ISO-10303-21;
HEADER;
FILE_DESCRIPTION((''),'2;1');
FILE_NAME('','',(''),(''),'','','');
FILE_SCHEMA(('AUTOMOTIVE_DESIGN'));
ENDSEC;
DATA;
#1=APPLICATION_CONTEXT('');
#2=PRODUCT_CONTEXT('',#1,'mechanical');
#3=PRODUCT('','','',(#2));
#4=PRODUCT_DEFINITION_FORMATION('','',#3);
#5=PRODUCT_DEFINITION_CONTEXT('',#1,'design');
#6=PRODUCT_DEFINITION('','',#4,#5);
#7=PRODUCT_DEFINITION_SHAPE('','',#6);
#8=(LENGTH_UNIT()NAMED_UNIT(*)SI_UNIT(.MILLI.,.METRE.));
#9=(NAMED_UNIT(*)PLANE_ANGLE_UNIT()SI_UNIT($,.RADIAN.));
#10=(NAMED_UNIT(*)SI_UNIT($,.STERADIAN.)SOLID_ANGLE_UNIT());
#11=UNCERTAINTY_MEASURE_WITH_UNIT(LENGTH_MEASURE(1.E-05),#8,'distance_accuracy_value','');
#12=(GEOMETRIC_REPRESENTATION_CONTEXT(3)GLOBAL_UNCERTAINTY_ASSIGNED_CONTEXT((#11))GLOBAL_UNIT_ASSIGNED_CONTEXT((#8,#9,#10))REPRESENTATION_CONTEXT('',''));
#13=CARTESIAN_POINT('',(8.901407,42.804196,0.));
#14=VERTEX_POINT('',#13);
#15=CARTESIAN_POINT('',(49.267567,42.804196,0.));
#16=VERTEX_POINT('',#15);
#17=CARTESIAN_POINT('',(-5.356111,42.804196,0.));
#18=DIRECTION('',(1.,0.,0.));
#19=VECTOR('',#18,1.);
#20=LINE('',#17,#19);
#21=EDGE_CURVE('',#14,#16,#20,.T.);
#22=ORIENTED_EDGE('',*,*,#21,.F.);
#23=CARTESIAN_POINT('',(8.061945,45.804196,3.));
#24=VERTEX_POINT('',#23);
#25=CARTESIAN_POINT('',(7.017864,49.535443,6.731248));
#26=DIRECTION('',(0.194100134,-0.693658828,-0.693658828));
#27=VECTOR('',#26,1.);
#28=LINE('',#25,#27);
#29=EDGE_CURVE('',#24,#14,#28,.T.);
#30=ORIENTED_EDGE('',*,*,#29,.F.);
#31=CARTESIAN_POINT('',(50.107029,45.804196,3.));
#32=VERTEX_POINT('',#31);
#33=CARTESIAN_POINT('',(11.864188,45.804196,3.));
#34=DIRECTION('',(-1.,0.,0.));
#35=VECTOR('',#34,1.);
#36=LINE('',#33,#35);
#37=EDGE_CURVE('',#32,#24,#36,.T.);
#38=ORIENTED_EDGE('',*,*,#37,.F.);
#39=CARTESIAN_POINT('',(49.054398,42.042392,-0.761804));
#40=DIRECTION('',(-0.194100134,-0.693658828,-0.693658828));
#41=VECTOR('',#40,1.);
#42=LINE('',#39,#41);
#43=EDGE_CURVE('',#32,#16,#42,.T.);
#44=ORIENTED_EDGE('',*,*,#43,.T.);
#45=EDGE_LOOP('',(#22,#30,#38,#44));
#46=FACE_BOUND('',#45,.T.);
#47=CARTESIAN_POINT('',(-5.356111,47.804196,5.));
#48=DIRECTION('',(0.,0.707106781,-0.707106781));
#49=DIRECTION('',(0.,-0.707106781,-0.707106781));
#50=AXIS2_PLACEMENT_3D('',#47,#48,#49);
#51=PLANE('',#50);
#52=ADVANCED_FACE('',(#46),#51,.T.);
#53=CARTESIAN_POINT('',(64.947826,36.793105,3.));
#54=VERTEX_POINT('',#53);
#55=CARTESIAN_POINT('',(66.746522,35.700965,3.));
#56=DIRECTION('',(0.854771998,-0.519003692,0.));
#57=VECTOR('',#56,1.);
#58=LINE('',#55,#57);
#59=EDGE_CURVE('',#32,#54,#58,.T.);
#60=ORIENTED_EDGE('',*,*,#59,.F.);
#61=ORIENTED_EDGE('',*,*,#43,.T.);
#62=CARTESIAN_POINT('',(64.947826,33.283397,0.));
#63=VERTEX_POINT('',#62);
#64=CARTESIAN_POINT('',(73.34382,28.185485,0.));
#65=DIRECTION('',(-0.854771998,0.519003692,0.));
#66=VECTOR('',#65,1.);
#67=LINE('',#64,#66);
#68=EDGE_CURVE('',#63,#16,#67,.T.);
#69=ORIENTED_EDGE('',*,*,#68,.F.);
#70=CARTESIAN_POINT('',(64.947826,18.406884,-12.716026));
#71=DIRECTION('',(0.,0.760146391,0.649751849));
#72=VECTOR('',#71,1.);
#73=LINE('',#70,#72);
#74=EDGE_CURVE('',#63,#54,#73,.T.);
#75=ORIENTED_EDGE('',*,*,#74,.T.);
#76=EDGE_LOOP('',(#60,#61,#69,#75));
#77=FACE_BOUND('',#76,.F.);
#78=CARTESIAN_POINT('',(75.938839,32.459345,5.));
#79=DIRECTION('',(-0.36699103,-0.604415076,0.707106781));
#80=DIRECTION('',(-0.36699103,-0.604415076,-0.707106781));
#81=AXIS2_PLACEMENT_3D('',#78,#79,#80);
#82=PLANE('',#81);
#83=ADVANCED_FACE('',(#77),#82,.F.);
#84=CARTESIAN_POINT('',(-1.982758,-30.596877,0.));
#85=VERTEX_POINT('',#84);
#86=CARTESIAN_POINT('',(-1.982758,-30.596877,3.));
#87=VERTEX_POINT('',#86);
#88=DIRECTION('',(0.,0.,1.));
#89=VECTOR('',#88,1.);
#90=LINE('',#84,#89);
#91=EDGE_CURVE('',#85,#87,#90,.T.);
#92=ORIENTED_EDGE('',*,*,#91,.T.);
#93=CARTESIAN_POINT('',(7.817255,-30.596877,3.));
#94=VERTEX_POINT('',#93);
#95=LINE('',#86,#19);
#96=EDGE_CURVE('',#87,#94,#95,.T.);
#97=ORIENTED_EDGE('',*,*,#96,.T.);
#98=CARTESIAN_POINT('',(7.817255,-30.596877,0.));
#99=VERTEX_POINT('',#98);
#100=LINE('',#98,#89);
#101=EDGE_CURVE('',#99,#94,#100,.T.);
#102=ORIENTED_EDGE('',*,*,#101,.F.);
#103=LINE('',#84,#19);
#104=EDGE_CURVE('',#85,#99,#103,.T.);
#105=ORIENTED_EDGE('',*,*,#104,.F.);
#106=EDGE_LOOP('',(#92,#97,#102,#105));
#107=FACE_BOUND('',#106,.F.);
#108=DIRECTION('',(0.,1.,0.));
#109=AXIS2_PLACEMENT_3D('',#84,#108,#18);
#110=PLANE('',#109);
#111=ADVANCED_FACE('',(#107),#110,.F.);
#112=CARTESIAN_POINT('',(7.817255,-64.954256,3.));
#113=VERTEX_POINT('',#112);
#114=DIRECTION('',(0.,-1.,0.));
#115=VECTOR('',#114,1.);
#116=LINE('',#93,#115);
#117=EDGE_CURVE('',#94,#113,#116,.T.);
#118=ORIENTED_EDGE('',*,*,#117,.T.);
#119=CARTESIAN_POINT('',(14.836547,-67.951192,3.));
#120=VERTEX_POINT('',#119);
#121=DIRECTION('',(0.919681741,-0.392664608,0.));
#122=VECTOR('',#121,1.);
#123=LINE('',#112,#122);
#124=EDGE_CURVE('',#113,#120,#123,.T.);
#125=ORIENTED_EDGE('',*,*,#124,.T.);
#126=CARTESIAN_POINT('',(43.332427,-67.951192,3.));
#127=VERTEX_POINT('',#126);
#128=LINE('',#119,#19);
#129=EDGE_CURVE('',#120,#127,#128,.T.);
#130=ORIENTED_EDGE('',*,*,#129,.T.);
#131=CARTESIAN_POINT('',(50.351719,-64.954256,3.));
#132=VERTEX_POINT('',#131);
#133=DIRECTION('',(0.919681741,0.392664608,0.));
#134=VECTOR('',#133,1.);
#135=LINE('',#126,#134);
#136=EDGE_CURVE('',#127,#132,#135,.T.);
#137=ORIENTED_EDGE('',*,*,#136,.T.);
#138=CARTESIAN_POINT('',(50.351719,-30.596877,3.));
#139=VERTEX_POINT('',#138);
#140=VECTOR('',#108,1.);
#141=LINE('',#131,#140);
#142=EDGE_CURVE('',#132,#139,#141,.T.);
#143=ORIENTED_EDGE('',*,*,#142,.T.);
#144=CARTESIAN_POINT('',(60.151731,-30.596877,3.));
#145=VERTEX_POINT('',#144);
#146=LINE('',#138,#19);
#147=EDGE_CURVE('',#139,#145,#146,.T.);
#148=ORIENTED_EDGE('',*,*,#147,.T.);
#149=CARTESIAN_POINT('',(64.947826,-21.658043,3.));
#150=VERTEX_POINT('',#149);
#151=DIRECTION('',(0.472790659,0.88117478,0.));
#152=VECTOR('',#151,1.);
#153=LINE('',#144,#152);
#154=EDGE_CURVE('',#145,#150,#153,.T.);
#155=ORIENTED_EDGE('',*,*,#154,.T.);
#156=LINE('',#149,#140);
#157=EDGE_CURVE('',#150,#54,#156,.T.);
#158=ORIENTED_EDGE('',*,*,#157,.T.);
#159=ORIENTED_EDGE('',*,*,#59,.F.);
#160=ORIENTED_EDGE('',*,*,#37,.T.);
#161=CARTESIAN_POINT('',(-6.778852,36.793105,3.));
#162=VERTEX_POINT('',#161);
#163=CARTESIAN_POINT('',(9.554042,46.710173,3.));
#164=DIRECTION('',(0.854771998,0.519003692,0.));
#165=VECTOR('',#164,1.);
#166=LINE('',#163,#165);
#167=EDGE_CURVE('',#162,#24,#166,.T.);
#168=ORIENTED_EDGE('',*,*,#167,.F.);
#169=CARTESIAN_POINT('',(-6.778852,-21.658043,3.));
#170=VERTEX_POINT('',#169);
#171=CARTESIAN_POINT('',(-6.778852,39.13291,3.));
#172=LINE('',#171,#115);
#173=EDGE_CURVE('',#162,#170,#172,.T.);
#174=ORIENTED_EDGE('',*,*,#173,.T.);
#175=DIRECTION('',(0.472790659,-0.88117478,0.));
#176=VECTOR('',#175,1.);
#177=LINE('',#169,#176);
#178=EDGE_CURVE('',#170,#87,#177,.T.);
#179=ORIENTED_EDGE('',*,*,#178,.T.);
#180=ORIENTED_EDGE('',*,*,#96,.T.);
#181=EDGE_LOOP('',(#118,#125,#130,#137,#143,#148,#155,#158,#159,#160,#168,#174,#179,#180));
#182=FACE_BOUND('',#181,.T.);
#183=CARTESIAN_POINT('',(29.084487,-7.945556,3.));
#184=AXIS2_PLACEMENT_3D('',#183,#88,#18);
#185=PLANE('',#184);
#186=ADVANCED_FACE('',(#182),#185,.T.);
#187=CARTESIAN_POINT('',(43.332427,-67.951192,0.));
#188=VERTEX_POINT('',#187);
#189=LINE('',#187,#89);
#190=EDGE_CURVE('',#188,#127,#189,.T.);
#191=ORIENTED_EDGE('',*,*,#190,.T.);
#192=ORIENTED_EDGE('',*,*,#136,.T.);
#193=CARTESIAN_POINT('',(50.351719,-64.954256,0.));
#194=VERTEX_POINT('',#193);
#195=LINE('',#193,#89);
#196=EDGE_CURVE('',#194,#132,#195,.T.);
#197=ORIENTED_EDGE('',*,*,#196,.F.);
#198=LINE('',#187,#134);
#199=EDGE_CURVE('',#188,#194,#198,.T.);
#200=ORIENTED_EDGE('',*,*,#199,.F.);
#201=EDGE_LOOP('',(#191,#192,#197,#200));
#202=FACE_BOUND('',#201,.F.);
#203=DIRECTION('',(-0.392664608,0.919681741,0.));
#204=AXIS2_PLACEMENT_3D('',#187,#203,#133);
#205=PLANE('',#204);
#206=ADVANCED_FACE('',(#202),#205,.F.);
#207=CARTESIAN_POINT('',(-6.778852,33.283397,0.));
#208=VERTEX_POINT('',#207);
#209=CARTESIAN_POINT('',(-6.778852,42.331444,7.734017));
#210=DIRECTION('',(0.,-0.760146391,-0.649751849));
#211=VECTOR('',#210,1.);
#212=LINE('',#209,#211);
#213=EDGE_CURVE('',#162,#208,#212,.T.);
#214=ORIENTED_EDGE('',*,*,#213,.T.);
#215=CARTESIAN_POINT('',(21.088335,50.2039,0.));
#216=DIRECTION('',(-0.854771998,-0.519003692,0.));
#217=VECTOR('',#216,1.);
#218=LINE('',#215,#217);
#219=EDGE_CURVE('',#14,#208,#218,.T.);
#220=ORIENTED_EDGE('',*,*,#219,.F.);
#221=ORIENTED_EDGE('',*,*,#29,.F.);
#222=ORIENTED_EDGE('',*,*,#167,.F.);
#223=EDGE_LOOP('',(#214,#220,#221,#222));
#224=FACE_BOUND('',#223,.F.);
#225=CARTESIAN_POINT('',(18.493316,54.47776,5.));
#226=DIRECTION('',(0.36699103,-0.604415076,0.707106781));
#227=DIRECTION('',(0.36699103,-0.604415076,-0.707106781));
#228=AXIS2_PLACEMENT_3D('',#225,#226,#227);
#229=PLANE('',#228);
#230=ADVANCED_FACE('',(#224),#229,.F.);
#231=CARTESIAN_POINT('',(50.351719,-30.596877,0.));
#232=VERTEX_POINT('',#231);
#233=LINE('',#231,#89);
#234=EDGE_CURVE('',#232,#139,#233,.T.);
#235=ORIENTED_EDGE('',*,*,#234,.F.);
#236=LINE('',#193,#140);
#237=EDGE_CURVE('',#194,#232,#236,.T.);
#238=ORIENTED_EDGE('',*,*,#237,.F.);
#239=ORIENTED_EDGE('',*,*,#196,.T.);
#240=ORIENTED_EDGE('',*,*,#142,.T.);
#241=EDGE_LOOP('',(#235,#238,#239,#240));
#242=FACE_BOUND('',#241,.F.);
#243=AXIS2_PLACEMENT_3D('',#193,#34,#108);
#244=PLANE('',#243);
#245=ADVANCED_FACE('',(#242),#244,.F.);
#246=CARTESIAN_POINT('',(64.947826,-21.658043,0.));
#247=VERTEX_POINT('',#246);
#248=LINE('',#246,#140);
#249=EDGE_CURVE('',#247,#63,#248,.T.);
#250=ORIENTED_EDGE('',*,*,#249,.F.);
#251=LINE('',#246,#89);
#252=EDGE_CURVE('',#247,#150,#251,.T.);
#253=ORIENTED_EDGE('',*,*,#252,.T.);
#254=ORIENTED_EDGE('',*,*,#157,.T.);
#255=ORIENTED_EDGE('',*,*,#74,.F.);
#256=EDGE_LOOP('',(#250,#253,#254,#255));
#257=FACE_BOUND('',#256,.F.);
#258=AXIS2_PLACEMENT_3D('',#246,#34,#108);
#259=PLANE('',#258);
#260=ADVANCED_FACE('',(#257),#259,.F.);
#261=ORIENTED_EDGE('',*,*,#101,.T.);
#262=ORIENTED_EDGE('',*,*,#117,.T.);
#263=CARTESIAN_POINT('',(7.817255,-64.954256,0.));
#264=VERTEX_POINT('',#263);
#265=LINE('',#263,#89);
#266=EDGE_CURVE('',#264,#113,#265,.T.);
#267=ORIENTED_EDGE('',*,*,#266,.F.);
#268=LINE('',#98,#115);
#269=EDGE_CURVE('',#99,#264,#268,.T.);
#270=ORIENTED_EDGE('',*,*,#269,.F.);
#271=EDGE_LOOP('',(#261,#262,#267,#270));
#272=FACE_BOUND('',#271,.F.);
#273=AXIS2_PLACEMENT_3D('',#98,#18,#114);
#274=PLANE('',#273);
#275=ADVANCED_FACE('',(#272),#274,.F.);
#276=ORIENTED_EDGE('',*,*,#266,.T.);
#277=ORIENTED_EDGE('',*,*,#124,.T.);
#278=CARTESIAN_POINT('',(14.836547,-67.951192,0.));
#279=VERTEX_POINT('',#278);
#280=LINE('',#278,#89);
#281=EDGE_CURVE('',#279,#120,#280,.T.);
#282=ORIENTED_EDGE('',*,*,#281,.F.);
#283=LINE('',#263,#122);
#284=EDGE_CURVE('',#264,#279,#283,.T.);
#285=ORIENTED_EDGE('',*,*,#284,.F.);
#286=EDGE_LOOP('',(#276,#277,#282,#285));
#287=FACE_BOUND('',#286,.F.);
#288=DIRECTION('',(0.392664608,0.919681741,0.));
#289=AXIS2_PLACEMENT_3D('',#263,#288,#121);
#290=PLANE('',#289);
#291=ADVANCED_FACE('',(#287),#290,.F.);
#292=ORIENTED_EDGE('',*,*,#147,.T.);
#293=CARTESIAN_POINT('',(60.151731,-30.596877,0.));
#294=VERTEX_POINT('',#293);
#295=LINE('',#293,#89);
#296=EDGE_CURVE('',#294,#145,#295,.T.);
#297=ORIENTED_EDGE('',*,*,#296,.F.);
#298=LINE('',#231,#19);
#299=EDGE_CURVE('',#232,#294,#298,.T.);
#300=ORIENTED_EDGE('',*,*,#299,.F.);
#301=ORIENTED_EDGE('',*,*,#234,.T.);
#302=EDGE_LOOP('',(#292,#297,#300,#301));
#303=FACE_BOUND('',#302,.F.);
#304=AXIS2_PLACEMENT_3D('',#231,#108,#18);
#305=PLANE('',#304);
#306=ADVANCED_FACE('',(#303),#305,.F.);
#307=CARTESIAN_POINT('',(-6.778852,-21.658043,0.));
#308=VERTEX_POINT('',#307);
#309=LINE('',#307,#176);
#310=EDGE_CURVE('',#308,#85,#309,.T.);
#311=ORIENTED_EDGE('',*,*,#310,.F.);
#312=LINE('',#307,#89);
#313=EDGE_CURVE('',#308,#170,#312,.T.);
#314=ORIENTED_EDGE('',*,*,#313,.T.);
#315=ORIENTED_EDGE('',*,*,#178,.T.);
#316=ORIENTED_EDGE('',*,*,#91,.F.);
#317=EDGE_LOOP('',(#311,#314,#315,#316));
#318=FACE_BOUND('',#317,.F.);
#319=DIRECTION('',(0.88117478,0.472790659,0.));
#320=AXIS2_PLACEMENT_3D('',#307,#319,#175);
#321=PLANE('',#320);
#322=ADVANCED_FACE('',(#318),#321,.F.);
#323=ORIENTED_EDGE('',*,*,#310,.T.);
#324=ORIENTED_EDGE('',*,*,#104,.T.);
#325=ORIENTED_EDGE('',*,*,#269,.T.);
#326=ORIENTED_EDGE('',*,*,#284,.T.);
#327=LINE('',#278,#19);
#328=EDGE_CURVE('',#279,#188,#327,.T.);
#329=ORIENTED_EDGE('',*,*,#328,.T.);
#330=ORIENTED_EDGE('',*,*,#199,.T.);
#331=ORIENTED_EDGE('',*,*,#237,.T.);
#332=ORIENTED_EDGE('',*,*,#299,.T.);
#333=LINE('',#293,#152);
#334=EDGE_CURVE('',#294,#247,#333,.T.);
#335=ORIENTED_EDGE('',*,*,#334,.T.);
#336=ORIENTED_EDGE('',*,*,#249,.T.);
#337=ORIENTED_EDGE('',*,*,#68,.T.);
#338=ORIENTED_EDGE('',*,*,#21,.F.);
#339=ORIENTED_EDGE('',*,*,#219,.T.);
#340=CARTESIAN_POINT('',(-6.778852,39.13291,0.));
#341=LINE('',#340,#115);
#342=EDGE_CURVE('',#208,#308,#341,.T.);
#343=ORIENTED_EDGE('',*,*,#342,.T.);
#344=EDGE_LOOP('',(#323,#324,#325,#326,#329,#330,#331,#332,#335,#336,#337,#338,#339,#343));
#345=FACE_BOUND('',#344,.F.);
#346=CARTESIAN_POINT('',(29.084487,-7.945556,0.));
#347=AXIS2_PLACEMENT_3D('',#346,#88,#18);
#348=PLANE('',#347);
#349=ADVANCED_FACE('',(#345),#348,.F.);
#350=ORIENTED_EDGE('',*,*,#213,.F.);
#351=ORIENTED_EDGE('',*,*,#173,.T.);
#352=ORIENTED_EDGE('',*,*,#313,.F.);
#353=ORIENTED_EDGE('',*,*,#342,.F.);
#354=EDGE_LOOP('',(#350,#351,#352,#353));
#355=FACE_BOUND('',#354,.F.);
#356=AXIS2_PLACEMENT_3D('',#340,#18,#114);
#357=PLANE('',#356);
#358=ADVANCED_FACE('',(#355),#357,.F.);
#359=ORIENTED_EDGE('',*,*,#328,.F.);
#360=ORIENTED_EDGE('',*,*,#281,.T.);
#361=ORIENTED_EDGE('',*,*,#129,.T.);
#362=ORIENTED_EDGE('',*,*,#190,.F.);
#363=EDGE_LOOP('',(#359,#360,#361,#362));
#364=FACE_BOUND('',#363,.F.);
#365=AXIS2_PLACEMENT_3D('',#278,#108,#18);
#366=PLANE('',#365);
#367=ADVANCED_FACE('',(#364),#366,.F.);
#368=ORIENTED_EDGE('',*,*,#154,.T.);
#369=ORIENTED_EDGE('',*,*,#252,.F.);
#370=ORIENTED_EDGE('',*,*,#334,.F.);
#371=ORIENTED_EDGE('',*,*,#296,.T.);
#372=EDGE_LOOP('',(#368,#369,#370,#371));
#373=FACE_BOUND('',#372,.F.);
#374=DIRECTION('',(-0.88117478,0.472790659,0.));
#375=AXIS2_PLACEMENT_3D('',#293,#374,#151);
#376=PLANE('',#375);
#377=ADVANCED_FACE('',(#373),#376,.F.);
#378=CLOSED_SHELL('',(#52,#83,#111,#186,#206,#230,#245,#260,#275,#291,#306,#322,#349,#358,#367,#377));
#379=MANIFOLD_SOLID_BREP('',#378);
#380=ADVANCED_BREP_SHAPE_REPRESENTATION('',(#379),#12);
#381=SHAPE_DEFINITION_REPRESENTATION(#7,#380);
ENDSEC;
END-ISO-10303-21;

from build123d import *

# Parameters (mm, degrees)
F1_DEPTH    = 3
F2_T1_DEPTH = 42.4243909264
F2_T3_DEPTH = 68.8811967359
F2_T5_DEPTH = 42.4243909264


# Not quite as in the source:
# - a fillet or chamfer that OpenCascade refuses, or shapes differently, is made with other operations: its cross-section is extruded or revolved along the edge and cut away or added


with BuildPart() as f1:
    # F0 (on Top) → F1 (new body)
    with BuildSketch(Plane.XY):
        Polygon((50.666670315, 47.8041956116), (7.5023034588, 47.8041956116), (-6.7788518712, 39.1329097454), (-6.7788518712, -21.6580425002), (-1.982757669, -30.5968765852), (7.8172552019, -30.5968765852), (7.8172552019, -64.9542560763), (14.8365469649, -67.9511922197), (43.3324268088, -67.9511922197), (50.3517185719, -64.9542560763), (50.3517185719, -30.5968765852), (60.1517314427, -30.5968765852), (64.9478256449, -21.6580425002), (64.9478256449, 39.1329097454), align=None)
    extrude(amount=F1_DEPTH)

    # F2: chamfer of 5 on 3 edges, made by hand

    # F2_s2 → F2_t1 (cut)
    with BuildSketch(Plane(origin=(41.0836527068, -24.9453275187, 0), x_dir=(0, 0, 1), z_dir=(-0.8547719975, 0.5190036919, 0))):
        Polygon((5, 67.1578767244), (0, 62.1578767244), (0, 67.1578767244), align=None)
    extrude(amount=F2_T1_DEPTH, mode=Mode.SUBTRACT)

    # F2_s4 → F2_t3 (cut)
    with BuildSketch(Plane.YZ.offset(-5.3561114811)):
        Polygon((47.8041956116, 5), (42.8041956116, 0), (47.8041956116, 0), align=None)
    extrude(amount=F2_T3_DEPTH, mode=Mode.SUBTRACT)

    # F2_s6 → F2_t5 (cut)
    with BuildSketch(Plane(origin=(37.6798265821, 22.8785795082, 0), x_dir=(0, 0, 1), z_dir=(-0.8547719975, -0.5190036919, 0))):
        Polygon((5, 36.9679645806), (0, 31.9679645806), (0, 36.9679645806), align=None)
    extrude(amount=F2_T5_DEPTH, mode=Mode.SUBTRACT)


solid = f1.part
